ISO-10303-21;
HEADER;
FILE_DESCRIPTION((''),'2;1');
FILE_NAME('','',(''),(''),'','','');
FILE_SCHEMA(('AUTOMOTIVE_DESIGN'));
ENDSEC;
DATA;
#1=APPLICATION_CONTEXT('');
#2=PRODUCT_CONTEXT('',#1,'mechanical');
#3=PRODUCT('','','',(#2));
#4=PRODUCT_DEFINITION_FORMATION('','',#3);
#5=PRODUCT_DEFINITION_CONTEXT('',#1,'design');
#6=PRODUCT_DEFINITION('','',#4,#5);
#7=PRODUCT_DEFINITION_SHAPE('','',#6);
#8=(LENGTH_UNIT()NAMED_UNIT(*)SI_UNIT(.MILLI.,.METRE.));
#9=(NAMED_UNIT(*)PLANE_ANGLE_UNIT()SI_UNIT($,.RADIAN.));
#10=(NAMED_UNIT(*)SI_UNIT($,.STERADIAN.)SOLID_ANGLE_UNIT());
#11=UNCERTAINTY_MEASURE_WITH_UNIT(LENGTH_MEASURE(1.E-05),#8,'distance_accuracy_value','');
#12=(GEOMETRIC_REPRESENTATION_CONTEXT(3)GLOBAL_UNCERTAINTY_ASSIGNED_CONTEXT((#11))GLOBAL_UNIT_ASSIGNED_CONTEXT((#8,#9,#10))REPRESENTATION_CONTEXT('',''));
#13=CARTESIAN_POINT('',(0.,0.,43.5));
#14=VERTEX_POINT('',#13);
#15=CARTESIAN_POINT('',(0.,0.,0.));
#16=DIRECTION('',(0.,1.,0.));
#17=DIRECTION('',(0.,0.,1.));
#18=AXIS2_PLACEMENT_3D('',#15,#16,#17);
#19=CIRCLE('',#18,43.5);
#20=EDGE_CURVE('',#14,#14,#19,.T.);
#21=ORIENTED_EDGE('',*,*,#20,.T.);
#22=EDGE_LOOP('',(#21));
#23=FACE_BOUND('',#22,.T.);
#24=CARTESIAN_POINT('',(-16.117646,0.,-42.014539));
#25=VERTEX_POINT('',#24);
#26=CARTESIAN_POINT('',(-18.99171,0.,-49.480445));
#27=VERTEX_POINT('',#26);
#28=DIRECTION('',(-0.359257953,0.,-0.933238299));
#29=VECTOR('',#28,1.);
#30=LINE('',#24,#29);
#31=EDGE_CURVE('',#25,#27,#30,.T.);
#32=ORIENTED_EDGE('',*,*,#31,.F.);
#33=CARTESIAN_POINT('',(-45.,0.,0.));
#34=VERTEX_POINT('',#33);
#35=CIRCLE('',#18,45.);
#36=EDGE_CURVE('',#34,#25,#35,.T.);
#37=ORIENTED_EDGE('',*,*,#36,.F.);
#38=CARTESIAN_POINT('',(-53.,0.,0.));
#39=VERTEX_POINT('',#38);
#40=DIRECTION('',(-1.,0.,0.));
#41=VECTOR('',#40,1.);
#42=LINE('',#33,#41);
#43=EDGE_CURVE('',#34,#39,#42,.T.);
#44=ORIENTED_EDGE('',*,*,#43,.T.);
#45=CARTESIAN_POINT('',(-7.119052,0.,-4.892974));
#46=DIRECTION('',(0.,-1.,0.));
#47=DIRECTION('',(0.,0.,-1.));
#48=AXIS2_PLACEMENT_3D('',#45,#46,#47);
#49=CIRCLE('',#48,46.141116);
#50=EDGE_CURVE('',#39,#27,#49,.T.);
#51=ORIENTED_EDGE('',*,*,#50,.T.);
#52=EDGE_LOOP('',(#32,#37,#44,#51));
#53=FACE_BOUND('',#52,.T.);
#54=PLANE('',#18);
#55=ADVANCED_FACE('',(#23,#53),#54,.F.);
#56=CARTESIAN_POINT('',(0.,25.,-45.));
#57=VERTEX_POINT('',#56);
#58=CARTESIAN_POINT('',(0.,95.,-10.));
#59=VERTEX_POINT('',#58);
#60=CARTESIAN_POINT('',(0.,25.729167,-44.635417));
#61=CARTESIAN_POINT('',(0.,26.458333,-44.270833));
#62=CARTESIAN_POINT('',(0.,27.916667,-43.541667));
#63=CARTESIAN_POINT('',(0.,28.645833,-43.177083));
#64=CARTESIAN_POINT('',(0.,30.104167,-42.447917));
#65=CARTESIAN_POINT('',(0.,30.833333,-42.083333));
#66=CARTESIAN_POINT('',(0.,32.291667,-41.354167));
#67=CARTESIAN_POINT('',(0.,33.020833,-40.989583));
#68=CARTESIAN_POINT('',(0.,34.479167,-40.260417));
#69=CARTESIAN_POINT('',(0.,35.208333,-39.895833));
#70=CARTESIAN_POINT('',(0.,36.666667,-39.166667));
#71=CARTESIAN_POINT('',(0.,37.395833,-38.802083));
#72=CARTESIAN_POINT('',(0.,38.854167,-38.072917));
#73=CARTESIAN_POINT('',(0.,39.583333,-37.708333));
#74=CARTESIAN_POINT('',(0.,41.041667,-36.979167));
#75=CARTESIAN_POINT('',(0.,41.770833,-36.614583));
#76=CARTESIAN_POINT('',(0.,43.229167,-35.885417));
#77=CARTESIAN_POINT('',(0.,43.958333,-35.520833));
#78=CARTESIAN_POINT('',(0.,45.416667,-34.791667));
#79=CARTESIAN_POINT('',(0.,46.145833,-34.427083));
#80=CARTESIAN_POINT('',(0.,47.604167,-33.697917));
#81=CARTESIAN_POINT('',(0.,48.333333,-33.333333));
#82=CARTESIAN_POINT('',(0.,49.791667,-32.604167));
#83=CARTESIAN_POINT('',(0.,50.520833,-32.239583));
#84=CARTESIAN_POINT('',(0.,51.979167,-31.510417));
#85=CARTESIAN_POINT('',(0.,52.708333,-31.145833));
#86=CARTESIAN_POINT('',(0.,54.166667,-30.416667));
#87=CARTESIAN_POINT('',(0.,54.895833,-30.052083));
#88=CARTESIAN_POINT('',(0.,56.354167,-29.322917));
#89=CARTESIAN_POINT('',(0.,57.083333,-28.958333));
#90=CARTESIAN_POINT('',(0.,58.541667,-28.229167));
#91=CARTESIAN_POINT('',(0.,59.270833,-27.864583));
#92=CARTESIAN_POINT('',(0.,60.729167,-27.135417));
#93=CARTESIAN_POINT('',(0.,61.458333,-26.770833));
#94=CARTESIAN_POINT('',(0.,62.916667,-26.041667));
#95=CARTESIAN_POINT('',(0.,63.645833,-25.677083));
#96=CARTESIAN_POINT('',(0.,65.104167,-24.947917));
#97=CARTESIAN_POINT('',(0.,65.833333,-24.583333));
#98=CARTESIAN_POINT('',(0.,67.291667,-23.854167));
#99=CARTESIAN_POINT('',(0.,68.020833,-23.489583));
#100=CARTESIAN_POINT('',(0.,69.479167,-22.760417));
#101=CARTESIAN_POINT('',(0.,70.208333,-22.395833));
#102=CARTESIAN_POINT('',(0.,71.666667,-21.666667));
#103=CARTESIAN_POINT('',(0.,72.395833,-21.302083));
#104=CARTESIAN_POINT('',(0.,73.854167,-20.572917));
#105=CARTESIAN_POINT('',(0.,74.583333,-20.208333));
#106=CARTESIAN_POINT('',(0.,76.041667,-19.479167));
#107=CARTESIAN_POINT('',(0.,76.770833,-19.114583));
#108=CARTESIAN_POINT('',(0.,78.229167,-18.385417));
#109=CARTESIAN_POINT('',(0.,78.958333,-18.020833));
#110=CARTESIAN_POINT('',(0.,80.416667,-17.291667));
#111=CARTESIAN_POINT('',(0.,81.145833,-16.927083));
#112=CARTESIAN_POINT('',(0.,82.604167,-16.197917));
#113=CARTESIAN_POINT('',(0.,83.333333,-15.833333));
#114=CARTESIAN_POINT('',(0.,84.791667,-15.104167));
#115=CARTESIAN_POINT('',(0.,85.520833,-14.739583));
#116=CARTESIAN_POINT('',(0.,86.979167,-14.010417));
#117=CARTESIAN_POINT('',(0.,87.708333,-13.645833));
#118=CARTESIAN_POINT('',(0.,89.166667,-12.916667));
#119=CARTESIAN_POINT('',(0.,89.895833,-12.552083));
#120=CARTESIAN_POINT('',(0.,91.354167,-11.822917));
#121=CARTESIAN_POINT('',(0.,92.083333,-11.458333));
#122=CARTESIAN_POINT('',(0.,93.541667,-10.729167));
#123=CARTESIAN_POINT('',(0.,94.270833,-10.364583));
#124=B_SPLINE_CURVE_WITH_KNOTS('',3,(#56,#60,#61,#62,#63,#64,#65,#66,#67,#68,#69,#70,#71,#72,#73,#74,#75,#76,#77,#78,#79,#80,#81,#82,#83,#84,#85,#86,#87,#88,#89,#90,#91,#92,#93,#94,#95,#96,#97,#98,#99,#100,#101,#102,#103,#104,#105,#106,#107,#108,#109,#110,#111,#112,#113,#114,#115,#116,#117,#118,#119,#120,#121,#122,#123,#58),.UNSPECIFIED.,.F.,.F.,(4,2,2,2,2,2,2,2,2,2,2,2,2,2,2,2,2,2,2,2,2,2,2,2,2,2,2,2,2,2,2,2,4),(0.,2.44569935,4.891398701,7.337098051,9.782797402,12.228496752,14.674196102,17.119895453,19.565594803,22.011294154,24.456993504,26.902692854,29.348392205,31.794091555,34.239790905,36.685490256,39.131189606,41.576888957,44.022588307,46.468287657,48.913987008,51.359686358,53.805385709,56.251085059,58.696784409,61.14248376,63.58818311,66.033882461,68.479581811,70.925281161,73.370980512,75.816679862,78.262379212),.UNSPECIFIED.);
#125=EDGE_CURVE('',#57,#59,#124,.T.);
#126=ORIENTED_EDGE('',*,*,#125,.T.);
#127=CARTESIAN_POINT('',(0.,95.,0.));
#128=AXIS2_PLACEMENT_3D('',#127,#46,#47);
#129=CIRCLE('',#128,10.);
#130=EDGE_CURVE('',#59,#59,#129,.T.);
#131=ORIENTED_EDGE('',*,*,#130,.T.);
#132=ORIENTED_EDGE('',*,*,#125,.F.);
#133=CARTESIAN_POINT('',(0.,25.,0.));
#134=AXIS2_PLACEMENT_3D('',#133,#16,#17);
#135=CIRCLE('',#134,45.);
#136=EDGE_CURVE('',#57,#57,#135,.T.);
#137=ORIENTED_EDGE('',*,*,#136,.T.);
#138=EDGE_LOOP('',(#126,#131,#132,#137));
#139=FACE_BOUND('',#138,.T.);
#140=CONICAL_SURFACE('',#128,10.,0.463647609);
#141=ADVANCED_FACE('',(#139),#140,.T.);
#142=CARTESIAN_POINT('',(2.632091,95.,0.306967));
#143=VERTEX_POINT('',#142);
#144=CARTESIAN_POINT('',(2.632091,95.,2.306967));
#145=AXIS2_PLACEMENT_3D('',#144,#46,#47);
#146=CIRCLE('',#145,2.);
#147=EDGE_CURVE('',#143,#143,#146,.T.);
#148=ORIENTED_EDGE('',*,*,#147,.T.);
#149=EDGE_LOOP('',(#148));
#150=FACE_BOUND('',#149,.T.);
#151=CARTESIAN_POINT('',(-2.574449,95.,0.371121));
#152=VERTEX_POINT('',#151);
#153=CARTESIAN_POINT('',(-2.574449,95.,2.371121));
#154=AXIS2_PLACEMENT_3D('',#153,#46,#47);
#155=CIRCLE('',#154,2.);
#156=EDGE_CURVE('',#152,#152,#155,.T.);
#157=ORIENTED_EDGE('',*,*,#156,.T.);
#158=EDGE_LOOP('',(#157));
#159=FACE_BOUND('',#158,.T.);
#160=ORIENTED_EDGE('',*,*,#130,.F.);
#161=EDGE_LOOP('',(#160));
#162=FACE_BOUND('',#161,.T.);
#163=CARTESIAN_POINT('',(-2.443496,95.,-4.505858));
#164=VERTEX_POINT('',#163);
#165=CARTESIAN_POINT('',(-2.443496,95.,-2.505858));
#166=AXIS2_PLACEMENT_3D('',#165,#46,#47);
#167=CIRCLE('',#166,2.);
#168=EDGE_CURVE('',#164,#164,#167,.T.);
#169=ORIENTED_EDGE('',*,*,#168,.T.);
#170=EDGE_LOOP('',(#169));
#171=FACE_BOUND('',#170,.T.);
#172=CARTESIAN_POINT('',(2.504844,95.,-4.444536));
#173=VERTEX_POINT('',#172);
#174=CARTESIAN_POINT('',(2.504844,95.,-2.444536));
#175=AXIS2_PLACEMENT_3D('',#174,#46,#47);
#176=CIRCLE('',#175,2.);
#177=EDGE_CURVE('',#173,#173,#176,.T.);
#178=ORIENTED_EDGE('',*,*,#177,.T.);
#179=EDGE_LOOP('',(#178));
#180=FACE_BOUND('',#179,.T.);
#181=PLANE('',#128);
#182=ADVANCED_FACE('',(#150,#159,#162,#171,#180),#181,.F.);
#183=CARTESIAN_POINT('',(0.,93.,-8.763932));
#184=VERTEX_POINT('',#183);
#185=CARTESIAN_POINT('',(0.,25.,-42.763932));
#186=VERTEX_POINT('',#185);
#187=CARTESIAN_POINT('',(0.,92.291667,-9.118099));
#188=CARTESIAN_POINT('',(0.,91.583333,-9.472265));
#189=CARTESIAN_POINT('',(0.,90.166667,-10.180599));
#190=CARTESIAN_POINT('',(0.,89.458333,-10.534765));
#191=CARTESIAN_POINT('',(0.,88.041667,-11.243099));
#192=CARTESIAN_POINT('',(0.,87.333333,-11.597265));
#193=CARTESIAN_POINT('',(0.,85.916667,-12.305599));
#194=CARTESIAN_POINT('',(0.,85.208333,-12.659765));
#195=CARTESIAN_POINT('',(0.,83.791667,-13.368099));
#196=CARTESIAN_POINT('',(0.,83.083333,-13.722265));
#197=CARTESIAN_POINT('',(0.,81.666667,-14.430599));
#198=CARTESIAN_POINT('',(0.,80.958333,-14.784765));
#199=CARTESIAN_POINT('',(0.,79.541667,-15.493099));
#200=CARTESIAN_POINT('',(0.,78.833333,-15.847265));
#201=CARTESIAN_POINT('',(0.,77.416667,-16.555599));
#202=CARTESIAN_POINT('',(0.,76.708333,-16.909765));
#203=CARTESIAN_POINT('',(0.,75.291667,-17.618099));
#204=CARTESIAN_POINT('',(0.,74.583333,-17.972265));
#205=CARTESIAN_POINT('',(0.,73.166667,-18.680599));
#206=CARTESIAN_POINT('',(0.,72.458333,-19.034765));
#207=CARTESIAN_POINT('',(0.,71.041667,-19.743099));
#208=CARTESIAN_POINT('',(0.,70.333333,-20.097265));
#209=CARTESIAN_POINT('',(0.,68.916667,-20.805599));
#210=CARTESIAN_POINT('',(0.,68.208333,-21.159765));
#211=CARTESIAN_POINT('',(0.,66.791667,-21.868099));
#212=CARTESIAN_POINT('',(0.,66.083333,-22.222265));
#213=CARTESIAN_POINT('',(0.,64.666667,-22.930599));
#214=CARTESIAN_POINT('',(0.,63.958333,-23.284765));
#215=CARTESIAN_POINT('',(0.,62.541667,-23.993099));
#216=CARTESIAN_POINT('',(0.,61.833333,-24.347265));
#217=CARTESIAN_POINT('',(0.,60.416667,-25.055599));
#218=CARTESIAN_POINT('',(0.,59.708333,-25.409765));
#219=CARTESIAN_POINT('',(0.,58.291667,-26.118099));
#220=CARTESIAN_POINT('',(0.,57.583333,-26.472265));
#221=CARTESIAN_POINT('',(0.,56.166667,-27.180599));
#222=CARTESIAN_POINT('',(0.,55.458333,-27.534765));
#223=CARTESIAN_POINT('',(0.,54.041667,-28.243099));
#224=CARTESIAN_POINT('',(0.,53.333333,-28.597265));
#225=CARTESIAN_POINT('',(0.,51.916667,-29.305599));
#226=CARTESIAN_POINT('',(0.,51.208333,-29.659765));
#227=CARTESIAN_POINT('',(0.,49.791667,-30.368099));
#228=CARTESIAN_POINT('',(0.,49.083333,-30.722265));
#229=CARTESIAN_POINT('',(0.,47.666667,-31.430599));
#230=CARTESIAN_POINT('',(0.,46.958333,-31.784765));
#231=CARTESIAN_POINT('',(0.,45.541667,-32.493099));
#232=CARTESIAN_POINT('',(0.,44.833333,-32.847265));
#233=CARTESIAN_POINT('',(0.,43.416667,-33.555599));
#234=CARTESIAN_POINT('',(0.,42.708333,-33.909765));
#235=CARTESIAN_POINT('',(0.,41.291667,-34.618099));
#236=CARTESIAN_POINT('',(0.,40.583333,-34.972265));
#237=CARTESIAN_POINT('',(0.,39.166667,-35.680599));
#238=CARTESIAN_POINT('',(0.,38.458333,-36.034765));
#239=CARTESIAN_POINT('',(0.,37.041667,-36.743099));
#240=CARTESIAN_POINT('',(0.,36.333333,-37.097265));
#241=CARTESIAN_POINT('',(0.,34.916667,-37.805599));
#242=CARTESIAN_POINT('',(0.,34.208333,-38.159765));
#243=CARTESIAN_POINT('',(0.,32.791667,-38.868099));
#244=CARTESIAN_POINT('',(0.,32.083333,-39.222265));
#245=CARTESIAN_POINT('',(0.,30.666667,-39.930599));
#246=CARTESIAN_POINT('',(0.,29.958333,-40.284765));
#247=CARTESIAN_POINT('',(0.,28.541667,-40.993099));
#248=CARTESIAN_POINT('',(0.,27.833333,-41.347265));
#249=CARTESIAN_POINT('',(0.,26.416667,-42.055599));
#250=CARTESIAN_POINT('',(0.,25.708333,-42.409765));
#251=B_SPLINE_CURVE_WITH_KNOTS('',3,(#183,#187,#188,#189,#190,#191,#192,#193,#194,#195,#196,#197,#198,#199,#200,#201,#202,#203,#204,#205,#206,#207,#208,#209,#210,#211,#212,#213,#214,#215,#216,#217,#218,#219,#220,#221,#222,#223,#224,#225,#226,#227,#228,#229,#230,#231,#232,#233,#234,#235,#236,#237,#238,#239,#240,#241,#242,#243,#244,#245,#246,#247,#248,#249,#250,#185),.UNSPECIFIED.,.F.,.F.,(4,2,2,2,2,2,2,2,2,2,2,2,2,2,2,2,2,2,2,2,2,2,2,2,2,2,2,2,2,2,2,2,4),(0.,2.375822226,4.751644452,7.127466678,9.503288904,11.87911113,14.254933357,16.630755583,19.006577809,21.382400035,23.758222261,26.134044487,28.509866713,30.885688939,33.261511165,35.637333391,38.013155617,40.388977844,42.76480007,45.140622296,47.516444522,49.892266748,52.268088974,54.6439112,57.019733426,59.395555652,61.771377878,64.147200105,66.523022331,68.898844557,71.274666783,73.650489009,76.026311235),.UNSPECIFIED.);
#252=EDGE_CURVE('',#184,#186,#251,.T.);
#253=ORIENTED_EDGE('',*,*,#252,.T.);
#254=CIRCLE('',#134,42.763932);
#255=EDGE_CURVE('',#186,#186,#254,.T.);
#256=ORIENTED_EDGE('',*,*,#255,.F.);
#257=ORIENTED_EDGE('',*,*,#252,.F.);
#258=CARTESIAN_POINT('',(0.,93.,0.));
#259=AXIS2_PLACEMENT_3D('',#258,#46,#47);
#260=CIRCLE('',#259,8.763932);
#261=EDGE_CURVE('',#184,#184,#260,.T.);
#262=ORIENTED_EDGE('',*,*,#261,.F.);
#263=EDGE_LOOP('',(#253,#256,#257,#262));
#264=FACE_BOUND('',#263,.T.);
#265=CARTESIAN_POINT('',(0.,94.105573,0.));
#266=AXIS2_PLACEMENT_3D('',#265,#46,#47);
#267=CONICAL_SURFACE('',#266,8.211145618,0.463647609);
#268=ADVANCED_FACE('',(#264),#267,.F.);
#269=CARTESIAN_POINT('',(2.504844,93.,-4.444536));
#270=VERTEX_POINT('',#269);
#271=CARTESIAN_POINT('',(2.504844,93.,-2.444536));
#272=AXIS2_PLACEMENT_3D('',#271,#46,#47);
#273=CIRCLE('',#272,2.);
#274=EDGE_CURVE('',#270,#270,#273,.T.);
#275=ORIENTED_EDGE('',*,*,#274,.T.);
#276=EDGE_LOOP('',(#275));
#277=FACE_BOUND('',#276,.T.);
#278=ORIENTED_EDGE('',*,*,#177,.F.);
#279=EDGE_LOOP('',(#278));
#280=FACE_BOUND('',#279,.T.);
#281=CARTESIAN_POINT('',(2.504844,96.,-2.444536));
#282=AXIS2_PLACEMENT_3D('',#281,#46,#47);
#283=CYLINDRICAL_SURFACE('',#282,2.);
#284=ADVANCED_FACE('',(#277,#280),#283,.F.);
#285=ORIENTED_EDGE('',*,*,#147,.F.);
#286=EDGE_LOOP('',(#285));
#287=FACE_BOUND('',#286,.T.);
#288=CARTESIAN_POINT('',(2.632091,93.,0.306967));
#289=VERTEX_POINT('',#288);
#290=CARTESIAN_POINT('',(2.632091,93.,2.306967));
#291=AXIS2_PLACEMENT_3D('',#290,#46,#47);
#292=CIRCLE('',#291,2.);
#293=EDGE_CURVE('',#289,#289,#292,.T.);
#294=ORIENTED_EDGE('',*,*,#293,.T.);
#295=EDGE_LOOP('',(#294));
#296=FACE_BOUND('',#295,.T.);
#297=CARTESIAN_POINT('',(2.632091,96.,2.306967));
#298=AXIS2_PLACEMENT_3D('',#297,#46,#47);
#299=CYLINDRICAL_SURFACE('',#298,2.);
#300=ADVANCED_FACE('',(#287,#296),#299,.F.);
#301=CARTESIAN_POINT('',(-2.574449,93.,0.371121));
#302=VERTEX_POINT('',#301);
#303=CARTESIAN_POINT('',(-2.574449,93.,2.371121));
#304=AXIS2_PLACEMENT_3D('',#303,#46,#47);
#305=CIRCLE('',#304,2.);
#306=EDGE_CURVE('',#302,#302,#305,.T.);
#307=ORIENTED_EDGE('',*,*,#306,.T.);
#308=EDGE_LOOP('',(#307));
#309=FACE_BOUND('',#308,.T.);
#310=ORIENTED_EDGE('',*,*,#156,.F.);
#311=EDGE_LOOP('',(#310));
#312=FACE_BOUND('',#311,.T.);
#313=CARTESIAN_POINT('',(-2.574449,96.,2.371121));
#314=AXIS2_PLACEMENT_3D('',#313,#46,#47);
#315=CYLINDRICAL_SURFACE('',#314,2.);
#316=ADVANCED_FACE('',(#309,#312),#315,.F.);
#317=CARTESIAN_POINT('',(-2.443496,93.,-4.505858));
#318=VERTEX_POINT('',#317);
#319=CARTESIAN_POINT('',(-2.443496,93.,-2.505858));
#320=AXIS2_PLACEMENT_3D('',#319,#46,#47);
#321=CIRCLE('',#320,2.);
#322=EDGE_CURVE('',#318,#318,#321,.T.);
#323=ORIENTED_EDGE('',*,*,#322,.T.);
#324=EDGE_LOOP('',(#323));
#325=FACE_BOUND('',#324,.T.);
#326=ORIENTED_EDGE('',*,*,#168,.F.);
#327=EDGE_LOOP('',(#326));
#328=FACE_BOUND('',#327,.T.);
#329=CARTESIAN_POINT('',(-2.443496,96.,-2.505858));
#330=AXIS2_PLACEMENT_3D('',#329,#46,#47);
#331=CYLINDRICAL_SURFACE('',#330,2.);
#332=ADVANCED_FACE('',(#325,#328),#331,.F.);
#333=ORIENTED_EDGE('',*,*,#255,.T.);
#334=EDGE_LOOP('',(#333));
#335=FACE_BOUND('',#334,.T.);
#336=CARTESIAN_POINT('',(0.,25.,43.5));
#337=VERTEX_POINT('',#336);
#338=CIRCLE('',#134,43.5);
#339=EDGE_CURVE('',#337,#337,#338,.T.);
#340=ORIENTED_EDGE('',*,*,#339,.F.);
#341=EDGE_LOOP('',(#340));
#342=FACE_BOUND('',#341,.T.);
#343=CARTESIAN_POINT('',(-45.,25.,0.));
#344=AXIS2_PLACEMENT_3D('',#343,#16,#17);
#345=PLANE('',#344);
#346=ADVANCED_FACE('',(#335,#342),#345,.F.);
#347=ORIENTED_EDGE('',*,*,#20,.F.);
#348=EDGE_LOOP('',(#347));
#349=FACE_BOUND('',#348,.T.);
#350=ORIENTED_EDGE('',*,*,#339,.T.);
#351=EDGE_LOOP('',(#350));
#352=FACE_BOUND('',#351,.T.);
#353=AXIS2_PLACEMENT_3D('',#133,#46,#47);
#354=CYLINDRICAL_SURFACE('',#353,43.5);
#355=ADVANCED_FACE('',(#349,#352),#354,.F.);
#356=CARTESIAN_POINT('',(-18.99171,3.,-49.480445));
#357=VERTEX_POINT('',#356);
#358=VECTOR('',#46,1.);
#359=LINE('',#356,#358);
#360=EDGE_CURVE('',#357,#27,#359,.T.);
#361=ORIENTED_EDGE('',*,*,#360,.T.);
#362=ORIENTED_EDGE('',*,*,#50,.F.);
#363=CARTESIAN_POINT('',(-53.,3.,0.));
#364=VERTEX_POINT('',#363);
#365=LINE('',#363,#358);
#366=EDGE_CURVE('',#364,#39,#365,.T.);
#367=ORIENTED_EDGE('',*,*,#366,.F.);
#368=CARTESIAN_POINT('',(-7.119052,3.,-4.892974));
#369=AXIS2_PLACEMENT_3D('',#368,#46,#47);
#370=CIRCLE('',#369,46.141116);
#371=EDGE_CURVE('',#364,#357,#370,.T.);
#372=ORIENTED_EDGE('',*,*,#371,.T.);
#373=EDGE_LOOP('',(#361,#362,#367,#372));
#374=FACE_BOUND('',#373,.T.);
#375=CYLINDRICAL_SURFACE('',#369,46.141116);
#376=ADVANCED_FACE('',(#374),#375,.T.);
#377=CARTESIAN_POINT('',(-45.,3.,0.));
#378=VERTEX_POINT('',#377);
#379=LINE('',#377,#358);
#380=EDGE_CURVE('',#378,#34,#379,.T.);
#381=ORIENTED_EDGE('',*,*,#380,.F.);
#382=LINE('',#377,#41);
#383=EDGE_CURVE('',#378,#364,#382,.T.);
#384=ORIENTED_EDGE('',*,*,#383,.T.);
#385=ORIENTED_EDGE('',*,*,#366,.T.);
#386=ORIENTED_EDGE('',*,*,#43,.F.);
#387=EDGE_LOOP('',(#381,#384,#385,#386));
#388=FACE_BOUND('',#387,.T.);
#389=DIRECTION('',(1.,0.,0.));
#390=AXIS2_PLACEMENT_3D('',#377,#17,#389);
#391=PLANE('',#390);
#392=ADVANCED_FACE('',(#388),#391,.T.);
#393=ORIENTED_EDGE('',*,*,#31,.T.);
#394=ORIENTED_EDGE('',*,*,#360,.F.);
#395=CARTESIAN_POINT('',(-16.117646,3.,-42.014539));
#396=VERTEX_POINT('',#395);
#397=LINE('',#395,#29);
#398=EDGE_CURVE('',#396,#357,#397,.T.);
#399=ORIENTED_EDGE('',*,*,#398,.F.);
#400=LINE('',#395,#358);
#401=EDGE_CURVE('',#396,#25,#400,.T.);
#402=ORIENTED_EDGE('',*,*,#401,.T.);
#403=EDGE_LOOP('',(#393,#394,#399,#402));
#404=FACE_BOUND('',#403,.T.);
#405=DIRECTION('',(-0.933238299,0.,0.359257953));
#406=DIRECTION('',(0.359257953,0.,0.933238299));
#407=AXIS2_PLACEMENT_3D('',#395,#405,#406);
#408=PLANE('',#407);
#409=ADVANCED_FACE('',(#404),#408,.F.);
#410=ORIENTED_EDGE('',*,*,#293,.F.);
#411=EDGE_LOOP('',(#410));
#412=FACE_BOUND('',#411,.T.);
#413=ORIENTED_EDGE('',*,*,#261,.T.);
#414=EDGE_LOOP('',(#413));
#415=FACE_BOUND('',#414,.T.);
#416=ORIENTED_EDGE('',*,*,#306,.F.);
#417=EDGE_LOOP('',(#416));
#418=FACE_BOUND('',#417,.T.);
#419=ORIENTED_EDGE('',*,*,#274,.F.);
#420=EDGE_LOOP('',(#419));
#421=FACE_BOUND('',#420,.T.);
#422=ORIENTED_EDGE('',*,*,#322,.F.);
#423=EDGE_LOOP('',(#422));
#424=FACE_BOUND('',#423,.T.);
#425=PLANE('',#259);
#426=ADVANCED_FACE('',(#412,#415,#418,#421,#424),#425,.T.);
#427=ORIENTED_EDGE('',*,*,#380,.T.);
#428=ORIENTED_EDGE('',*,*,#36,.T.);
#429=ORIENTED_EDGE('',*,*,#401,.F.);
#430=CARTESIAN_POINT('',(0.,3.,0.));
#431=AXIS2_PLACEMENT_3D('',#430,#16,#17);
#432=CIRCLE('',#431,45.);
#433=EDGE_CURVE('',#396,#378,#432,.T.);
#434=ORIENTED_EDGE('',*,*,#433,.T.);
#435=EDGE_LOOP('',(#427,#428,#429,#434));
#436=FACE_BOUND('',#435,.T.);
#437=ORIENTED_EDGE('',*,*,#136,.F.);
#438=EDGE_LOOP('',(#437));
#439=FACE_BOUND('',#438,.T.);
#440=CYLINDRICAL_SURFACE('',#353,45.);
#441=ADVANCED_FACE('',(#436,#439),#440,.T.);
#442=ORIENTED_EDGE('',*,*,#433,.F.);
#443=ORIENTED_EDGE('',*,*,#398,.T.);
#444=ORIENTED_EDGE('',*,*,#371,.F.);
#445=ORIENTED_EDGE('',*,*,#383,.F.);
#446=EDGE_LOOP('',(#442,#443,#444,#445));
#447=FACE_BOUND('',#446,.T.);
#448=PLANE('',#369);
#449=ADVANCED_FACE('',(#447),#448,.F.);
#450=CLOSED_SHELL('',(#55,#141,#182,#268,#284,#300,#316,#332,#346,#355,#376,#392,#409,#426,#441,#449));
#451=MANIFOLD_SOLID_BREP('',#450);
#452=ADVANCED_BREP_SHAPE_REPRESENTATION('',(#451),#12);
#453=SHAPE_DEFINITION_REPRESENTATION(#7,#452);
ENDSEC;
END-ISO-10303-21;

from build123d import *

# Parameters (mm, degrees)
SKETCH_1_R          = 45
SKETCH_1_R_2        = 43.5
EXTRUDE_1_DEPTH     = 25
EXTRUDE_2_DEPTH     = 3
SKETCH_6_R          = 2
CUT_EXTRUDE_1_DEPTH = 3


# Read off the part's stored shape, not the designer's step: 抽壳9
with BuildPart() as part:
    # 草图1 → 凸台-拉伸1 (new body)
    with BuildSketch(Plane(origin=(0, 0, 0), x_dir=(1, 0, 0), z_dir=(0, 1, 0))):
        with Locations(Location((0, 0, 0), (0, 0, 270))):
            Circle(SKETCH_1_R)
        with Locations(Location((0, 0, 0), (0, 0, 270))):
            Circle(SKETCH_1_R_2, mode=Mode.SUBTRACT)
    extrude(amount=EXTRUDE_1_DEPTH)

    # 草图2 → 凸台-拉伸2 (add)
    with BuildSketch(Plane(origin=(0, 0, 0), x_dir=(1, 0, 0), z_dir=(0, 1, 0))):
        with BuildLine():
            Line((-45, 0), (-53, 0))
            ThreePointArc((-53, 0), (-45.144679687, 31.028280094), (-18.991709994, 49.480445253))
            Line((-18.991709994, 49.480445253), (-16.117646372, 42.014538858))
            ThreePointArc((-16.117646372, 42.014538858), (-37.082975115, 25.492213647), (-45, 0))
        make_face()
    extrude(amount=EXTRUDE_2_DEPTH)

    # 草图5 → 旋转3 (revolve)
    with BuildSketch(Plane.XY, mode=Mode.PRIVATE) as revolve_3_sk:
        Polygon((-45, 25), (0, 25), (0, 95), (-10, 95), align=None)
    revolve(revolve_3_sk.sketch.rotate(Axis((0, 25, 0), (0, 1, 0)), 270), axis=Axis((0, 25, 0), (0, 1, 0)))

    # 抽壳9 outline → 抽壳9 (revolve, cut)
    with BuildSketch(Plane.XY):
        Polygon((42.763932023, 25), (8.763932023, 93), (0, 93), (0, 25), align=None)
    revolve(axis=Axis((0, 0, 0), (0, 1, 0)), mode=Mode.SUBTRACT)

    # 草图6 → 切除-拉伸1 (cut)
    with BuildSketch(Plane.XZ.offset(-93)):
        with Locations(Location((-2.574448684, 2.371120826, 0), (0, 0, 270))):
            Circle(SKETCH_6_R)
        with Locations(Location((2.6320911, 2.306966935, 0), (0, 0, 270))):
            Circle(SKETCH_6_R)
        with Locations(Location((-2.443496184, -2.505858416, 0), (0, 0, 270))):
            Circle(SKETCH_6_R)
        with Locations(Location((2.504843697, -2.444536368, 0), (0, 0, 270))):
            Circle(SKETCH_6_R)
    extrude(amount=-CUT_EXTRUDE_1_DEPTH, mode=Mode.SUBTRACT)


solid = part.part
